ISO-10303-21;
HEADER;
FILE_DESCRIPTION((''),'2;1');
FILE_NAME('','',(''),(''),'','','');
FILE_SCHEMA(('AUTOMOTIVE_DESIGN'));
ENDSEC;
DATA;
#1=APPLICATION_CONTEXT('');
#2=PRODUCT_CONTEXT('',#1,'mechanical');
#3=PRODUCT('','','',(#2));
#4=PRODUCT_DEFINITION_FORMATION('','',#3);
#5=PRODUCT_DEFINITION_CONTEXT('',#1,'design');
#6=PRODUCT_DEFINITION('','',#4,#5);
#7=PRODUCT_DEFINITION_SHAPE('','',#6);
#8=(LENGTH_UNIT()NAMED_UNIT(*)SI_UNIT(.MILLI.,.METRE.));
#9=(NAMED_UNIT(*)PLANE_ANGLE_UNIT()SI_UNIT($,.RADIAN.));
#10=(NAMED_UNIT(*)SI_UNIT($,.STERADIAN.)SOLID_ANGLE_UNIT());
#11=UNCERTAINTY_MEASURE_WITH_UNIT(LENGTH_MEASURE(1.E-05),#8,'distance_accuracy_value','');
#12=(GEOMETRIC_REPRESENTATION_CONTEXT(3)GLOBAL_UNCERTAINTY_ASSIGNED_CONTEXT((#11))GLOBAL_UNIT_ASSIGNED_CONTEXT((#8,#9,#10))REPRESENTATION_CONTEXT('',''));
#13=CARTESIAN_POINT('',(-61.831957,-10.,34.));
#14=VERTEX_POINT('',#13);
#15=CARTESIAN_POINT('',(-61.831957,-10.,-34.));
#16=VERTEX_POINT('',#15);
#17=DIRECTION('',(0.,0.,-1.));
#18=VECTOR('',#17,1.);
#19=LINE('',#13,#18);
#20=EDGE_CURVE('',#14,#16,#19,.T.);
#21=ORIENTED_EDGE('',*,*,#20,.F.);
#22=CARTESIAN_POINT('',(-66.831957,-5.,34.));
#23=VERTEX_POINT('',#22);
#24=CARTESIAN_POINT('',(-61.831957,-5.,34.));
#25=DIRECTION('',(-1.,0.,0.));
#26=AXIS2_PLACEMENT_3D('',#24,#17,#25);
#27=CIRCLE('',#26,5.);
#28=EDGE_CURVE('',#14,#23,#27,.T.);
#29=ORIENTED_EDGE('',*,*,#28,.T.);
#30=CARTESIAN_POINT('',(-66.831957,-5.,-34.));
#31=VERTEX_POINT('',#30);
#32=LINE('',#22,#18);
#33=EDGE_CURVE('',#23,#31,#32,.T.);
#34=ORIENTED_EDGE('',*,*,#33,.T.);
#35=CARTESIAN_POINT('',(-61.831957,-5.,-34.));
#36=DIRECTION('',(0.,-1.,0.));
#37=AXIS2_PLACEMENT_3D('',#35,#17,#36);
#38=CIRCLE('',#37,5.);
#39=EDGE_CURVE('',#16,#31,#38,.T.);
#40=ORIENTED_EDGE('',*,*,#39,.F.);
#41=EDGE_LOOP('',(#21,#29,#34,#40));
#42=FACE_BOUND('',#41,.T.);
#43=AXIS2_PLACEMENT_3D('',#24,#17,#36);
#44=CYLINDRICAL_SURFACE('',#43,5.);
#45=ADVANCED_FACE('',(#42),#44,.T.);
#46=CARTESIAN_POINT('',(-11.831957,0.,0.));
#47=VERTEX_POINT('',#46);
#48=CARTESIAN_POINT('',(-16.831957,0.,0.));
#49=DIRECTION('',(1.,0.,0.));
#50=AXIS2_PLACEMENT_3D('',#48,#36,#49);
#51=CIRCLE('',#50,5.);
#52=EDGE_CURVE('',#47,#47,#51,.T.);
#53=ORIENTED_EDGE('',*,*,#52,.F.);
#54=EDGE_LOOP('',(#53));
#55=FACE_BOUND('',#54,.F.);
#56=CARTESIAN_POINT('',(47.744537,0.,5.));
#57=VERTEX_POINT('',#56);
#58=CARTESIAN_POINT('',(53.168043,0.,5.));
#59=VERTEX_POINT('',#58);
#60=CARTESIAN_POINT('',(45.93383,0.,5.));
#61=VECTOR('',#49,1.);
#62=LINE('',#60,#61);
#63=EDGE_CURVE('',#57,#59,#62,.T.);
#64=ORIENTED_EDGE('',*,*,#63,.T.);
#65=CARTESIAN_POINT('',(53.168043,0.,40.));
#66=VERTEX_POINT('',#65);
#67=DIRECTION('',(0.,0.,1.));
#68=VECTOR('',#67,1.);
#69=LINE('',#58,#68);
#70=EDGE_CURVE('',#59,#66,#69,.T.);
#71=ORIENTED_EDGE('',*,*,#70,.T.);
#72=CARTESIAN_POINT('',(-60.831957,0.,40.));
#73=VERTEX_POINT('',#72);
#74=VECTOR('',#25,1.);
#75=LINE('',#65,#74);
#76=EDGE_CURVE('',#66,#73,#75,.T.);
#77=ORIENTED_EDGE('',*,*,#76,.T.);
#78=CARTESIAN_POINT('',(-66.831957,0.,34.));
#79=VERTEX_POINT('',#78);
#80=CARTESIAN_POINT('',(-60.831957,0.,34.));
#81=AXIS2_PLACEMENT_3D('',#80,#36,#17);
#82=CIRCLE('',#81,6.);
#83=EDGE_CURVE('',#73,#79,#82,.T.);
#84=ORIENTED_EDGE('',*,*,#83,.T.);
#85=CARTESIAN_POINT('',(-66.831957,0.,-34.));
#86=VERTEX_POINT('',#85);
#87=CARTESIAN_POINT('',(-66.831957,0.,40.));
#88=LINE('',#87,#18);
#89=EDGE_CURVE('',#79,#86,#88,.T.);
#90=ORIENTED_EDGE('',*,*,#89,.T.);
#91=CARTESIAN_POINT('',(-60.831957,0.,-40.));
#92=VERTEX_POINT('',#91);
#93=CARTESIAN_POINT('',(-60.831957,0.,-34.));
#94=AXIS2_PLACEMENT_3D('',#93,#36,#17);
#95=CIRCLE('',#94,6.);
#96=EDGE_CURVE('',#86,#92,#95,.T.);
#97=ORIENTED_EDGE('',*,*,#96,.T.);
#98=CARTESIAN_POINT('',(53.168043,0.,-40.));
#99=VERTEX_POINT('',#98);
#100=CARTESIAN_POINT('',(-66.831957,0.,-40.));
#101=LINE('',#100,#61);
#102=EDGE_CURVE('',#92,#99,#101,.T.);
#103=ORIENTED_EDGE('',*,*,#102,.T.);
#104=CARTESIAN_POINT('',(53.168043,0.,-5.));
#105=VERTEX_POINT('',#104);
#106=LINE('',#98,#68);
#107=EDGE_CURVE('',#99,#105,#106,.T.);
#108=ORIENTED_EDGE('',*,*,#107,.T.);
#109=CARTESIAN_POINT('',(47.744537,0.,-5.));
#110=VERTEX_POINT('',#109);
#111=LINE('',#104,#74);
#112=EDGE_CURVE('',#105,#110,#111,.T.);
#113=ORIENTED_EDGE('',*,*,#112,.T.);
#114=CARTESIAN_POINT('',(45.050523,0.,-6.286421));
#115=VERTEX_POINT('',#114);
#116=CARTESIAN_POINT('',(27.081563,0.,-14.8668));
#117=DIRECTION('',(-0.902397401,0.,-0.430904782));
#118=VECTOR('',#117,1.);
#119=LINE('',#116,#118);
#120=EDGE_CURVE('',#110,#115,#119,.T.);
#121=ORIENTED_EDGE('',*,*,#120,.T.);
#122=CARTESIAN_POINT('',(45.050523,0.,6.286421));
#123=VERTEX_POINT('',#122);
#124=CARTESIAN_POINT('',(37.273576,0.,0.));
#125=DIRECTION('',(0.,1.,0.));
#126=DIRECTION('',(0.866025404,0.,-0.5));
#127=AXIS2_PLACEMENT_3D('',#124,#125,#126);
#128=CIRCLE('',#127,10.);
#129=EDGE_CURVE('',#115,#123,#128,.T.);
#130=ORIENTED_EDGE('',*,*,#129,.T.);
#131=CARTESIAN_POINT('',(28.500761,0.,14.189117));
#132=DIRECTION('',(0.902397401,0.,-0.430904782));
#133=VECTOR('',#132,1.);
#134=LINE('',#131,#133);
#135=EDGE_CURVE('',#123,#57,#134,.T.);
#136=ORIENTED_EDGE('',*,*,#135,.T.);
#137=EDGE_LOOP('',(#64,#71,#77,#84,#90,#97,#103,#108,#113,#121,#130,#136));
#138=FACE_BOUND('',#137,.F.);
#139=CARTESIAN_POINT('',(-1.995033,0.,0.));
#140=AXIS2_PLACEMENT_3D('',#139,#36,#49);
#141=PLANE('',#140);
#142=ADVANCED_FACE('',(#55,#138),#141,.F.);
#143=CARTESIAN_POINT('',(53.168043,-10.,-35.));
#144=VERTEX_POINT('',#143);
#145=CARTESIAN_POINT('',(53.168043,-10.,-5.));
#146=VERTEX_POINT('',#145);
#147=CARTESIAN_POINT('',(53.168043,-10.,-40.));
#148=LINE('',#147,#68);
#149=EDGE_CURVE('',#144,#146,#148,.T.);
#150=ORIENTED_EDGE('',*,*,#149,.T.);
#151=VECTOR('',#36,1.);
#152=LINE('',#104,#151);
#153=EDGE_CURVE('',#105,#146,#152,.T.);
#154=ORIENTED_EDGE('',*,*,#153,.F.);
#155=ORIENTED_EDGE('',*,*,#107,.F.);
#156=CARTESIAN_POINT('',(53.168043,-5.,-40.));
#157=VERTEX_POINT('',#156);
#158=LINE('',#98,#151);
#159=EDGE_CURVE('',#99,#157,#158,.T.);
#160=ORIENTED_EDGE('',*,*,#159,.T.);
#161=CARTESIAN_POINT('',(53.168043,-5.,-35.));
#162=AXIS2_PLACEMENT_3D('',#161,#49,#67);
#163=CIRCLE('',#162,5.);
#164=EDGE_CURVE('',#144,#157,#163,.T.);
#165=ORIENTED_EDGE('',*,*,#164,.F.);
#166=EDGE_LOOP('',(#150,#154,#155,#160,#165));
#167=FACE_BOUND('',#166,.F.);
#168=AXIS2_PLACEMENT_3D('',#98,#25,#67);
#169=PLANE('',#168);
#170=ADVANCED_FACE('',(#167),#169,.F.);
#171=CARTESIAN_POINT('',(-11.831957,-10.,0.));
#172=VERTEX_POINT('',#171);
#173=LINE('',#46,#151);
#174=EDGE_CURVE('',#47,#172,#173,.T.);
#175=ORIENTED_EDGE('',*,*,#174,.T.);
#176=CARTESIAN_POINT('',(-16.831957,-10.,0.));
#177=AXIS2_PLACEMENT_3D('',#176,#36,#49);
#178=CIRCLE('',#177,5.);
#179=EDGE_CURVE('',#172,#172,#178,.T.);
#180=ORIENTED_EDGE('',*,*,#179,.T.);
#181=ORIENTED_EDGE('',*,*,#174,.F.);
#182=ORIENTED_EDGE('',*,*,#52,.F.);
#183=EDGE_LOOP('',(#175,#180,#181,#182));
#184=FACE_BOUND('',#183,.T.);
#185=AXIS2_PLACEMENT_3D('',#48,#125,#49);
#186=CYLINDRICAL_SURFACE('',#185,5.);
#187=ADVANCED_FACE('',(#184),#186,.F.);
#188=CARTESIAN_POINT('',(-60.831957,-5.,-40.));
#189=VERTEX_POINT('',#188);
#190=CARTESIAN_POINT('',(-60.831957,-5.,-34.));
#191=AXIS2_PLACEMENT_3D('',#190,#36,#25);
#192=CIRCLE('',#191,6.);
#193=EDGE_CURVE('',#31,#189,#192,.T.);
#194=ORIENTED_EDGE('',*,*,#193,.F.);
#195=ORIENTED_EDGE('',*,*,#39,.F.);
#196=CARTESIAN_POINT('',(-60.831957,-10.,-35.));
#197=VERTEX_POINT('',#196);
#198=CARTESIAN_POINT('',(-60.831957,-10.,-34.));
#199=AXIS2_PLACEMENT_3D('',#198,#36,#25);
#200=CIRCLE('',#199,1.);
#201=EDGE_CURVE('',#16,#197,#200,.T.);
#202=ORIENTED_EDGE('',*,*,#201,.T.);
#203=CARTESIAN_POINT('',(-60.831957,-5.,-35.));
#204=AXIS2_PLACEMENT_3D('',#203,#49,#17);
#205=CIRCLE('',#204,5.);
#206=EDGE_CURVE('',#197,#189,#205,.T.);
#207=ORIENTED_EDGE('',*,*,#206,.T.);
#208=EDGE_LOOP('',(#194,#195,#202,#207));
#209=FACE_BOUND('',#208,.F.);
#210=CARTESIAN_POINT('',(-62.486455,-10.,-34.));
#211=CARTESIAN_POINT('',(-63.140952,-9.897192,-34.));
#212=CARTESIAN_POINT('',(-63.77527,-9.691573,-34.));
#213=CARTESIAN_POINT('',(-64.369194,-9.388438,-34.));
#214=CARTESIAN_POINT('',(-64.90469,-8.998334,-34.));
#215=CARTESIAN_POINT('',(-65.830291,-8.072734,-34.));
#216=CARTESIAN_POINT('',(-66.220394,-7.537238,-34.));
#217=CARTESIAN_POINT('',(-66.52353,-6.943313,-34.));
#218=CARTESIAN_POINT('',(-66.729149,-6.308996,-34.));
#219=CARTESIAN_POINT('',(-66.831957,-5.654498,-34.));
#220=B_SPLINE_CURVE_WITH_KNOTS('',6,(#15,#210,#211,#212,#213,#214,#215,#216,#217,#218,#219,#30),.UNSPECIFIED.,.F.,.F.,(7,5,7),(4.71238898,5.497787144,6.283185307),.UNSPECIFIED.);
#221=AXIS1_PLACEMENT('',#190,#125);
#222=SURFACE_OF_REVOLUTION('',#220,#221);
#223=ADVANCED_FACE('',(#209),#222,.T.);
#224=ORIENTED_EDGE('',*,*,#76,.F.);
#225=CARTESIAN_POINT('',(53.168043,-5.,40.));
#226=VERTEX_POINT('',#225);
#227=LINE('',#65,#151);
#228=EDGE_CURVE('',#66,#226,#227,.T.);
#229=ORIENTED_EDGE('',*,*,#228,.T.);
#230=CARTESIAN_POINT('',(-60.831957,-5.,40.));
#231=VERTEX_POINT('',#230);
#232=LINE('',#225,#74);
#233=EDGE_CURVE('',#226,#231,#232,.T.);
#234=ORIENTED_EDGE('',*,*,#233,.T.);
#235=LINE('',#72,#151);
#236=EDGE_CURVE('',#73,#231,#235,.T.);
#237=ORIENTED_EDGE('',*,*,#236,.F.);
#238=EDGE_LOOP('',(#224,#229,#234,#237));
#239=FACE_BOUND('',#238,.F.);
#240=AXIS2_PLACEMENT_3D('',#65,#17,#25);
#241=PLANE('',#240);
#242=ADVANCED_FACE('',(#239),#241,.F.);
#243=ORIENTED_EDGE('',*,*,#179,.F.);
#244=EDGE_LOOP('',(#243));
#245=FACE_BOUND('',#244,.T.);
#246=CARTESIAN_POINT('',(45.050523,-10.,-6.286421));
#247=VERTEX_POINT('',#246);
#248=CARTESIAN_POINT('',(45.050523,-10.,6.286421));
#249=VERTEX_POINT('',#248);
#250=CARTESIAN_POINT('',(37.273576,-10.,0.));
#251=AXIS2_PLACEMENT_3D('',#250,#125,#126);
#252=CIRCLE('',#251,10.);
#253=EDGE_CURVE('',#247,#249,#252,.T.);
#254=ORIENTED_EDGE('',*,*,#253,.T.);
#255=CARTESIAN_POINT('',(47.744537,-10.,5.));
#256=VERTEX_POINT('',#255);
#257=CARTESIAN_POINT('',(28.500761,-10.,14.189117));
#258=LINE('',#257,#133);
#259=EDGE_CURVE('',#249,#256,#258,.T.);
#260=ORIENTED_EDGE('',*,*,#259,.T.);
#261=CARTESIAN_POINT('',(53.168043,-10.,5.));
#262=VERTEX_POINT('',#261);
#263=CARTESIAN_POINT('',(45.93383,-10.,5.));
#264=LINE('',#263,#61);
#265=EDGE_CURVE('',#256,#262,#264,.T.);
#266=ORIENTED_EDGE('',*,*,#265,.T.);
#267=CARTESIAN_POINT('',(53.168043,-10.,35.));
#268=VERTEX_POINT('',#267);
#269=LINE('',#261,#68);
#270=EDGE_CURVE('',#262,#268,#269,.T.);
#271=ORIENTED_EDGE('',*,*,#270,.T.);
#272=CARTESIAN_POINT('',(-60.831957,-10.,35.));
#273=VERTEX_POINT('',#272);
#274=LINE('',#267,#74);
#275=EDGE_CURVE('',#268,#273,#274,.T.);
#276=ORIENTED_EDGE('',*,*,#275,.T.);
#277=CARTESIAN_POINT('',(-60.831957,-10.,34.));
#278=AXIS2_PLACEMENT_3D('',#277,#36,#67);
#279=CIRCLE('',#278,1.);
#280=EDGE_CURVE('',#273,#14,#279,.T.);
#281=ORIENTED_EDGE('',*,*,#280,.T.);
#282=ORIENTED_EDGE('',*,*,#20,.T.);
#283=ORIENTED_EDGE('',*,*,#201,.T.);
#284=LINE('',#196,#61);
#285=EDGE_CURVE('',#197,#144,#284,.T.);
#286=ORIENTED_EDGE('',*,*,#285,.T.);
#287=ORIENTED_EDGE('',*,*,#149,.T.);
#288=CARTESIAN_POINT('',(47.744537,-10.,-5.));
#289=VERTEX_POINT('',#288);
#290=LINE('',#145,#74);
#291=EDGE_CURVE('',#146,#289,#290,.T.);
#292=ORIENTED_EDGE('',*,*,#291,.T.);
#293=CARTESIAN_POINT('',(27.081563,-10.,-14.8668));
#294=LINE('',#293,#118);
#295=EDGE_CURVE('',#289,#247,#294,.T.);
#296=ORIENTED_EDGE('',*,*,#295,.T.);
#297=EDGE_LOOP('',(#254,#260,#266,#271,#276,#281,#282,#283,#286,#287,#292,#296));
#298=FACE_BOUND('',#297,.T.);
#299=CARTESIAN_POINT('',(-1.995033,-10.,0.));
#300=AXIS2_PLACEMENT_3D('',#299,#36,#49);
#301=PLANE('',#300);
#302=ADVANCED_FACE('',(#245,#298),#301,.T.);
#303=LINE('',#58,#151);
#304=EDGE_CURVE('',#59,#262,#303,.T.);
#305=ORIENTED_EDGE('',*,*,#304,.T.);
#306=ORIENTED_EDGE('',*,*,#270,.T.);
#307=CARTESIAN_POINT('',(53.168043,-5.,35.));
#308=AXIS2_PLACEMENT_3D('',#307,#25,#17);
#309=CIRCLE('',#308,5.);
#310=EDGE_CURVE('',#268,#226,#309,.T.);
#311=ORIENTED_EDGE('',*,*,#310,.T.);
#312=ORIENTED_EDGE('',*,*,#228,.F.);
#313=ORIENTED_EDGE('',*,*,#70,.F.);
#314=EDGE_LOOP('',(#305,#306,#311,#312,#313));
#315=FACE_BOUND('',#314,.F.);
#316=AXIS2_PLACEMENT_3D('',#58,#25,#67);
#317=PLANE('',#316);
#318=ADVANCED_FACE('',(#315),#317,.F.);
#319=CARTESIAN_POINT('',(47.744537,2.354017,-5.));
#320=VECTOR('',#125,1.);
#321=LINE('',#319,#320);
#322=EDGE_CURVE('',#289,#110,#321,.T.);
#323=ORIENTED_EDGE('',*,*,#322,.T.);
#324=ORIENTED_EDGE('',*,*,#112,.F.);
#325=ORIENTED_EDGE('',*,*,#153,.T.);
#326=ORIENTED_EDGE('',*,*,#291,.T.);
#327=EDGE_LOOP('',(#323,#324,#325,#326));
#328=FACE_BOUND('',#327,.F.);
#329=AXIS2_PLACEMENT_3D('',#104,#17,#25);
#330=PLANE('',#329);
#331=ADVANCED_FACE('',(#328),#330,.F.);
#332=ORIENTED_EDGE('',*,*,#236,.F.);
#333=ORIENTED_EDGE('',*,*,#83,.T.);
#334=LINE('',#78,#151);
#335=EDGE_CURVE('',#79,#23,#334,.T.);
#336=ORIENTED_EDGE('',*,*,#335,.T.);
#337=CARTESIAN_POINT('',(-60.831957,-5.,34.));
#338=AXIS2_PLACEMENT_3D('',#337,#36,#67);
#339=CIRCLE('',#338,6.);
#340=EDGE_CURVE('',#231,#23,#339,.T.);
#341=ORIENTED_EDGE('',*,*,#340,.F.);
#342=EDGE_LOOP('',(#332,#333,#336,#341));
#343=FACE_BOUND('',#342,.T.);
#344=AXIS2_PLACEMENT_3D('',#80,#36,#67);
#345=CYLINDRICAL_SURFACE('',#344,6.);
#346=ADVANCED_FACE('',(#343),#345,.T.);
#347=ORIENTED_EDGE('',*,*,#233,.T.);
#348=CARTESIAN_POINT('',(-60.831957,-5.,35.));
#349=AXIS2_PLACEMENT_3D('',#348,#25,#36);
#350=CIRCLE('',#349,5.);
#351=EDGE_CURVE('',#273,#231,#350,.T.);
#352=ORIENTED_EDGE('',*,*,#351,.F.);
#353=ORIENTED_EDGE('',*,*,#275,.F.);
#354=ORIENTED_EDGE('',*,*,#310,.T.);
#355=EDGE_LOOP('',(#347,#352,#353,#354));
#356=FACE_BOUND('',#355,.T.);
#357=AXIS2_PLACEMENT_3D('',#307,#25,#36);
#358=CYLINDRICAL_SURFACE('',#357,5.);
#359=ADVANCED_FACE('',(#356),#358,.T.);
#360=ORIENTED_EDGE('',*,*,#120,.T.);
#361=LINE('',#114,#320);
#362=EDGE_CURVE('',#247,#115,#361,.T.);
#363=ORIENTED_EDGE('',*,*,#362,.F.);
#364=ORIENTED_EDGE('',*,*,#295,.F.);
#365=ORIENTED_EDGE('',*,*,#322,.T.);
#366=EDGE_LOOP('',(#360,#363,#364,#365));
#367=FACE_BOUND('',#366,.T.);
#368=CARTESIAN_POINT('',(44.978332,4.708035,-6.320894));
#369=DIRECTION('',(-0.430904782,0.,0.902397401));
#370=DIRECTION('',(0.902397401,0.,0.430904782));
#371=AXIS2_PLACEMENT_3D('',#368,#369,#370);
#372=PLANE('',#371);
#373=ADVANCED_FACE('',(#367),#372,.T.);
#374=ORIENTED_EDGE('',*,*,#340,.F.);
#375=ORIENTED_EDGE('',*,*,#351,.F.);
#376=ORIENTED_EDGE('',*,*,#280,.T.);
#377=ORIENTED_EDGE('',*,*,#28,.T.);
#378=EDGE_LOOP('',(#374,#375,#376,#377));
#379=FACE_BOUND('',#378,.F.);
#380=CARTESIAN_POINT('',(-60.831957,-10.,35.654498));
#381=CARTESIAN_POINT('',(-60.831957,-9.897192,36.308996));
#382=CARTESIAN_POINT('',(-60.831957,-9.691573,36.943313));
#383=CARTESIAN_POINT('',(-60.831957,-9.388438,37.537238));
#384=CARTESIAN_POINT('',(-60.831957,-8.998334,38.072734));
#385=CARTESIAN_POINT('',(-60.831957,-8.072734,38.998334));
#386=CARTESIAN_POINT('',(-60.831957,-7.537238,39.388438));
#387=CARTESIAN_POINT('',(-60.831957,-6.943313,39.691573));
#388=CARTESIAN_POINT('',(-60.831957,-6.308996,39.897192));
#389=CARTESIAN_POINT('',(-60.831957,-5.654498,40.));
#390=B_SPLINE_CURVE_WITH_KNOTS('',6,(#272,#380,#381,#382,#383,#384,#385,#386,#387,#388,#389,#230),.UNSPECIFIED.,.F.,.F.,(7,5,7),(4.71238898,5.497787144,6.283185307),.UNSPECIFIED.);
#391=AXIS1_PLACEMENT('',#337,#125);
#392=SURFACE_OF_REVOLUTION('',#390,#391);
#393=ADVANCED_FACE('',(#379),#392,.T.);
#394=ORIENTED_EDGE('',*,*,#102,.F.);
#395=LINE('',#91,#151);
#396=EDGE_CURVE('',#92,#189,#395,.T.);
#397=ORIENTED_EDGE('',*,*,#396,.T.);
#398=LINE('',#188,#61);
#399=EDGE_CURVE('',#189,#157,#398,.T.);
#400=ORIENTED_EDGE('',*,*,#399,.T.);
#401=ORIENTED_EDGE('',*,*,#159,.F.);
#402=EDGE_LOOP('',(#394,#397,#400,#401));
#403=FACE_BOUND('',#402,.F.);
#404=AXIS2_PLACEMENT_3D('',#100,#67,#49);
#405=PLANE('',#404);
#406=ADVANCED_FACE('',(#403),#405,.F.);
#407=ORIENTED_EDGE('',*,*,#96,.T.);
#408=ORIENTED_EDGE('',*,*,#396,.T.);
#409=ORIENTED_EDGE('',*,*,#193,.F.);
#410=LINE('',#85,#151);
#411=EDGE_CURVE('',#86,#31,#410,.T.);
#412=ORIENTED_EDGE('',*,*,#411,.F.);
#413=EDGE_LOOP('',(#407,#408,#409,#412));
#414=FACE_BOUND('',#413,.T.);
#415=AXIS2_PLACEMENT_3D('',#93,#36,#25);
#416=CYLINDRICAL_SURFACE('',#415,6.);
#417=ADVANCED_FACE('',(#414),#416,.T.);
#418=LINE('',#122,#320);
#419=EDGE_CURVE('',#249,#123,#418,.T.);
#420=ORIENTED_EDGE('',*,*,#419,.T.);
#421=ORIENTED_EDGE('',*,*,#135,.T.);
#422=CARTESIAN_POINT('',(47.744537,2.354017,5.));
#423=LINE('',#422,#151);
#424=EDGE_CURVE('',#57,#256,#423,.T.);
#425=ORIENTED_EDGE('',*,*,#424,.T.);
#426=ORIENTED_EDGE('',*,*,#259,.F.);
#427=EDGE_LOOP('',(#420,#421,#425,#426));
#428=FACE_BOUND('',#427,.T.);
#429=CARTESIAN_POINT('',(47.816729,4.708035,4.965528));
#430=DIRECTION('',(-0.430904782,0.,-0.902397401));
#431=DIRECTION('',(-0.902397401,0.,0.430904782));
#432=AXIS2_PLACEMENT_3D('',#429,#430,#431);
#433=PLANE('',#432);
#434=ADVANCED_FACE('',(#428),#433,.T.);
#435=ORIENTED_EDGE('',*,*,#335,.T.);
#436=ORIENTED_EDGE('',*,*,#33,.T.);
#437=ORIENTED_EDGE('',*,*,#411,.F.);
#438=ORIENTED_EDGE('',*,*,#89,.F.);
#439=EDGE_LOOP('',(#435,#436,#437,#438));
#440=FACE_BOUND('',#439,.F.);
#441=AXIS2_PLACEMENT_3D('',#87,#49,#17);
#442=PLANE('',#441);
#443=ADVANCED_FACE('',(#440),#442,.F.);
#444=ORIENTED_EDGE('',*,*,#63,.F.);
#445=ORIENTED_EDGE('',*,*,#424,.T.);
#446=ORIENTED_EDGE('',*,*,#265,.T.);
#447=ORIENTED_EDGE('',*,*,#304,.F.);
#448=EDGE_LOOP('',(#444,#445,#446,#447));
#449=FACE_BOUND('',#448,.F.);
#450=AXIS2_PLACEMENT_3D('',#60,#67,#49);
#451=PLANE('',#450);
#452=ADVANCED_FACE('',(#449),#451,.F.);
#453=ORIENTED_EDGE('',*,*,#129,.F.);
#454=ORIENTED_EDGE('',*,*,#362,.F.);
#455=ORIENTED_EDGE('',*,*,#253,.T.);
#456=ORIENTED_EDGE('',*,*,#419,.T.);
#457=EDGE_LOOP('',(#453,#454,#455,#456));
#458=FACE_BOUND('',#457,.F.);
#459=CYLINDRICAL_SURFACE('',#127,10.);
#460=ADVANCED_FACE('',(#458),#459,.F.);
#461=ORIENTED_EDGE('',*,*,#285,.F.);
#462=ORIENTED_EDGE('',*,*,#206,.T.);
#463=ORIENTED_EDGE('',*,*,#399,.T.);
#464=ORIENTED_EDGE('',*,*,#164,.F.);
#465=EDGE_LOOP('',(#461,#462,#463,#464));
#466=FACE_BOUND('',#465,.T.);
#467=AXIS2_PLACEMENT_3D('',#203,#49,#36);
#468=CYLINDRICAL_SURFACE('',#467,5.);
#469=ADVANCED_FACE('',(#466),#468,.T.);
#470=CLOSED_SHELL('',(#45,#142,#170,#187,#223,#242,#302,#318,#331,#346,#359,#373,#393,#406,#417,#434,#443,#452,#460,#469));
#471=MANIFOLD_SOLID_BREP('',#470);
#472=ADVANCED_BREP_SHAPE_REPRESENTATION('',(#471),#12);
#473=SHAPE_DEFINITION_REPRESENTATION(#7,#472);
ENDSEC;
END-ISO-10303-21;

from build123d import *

# Parameters (mm, degrees)
F0_R        = 5
F1_DEPTH    = 10
F2_DEPTH    = 23.2
F3_R        = 6
F4_T1_DEPTH = 19.4160695157
F5_R        = 5


# Not quite as in the source:
# - a fillet or chamfer that OpenCascade refuses, or shapes differently, is made with other operations: its cross-section is extruded or revolved along the edge and cut away or added


with BuildPart() as f1:
    # F0 (on Front) → F1 (new body)
    with BuildSketch(Plane.XZ):
        with BuildLine():
            Line((53.1680434942, 40), (-66.8319565058, 40))
            Line((-66.8319565058, 40), (-66.8319565058, -40))
            Line((-66.8319565058, -40), (53.1680434942, -40))
            Line((53.1680434942, -40), (53.1680434942, -5))
            Line((53.1680434942, -5), (47.2735762596, -5))
            Line((47.2735762596, -5), (45.9338302975, -5))
            ThreePointArc((45.9338302975, -5), (27.2735762596, 0), (45.9338302975, 5))
            Line((45.9338302975, 5), (47.2735762596, 5))
            Line((47.2735762596, 5), (53.1680434942, 5))
            Line((53.1680434942, 5), (53.1680434942, 40))
        make_face()
        with Locations((-16.8319565058, 0)):
            Circle(F0_R, mode=Mode.SUBTRACT)
    extrude(amount=F1_DEPTH)

    # F0 (on Front) → F2 (cut)
    with BuildSketch(Plane.XZ):
        with Locations((-16.8319565058, 0)):
            Circle(F0_R)
    extrude(amount=-F2_DEPTH, mode=Mode.SUBTRACT)

    # F3
    f3_edges = [f1.edges().sort_by_distance(p)[0] for p in [
        (-66.831957, -5, -40),
        (-66.831957, -5, 40),
    ]]
    fillet(f3_edges, radius=F3_R)

    # F4: chamfer of 2 on 2 edges, made by hand

    # F4_s2 → F4_t1 (cut)
    with BuildSketch(Plane.XZ.offset(-4.7080347579)):
        with BuildLine():
            Line((44.9783315762, -6.3208937548), (47.8167286643, -4.9655276174))
            Line((47.8167286643, -4.9655276174), (47.8167286643, -4.9255276174))
            ThreePointArc((47.8167286643, -4.9255276174), (46.8752794809, -4.96), (45.9338302975, -4.96))
            Line((45.9338302975, -4.96), (45.8991892813, -4.98))
            ThreePointArc((45.8991892813, -4.98), (45.4646544727, -5.6663778296), (44.9472237878, -6.2957480693))
            Line((44.9472237878, -6.2957480693), (44.9783315762, -6.3208937548))
        make_face()
        with BuildLine():
            Line((47.8167286643, 4.9655276174), (44.9783315762, 6.3208937548))
            Line((44.9783315762, 6.3208937548), (44.9472237878, 6.2957480693))
            ThreePointArc((44.9472237878, 6.2957480693), (45.4646544727, 5.6663778296), (45.8991892813, 4.98))
            Line((45.8991892813, 4.98), (45.9338302975, 4.96))
            ThreePointArc((45.9338302975, 4.96), (46.8752794809, 4.96), (47.8167286643, 4.9255276174))
            Line((47.8167286643, 4.9255276174), (47.8167286643, 4.9655276174))
        make_face()
    extrude(amount=F4_T1_DEPTH, mode=Mode.SUBTRACT)

    # F5
    f5_edges = [f1.edges().sort_by_distance(p)[0] for p in [
        (-3.831957, -10, -40),
        (-3.831957, -10, 40),
        (-65.074597, -10, 38.242641),
        (-65.074597, -10, -38.242641),
        (-66.831957, -10, 0),
    ]]
    fillet(f5_edges, radius=F5_R)


solid = f1.part
